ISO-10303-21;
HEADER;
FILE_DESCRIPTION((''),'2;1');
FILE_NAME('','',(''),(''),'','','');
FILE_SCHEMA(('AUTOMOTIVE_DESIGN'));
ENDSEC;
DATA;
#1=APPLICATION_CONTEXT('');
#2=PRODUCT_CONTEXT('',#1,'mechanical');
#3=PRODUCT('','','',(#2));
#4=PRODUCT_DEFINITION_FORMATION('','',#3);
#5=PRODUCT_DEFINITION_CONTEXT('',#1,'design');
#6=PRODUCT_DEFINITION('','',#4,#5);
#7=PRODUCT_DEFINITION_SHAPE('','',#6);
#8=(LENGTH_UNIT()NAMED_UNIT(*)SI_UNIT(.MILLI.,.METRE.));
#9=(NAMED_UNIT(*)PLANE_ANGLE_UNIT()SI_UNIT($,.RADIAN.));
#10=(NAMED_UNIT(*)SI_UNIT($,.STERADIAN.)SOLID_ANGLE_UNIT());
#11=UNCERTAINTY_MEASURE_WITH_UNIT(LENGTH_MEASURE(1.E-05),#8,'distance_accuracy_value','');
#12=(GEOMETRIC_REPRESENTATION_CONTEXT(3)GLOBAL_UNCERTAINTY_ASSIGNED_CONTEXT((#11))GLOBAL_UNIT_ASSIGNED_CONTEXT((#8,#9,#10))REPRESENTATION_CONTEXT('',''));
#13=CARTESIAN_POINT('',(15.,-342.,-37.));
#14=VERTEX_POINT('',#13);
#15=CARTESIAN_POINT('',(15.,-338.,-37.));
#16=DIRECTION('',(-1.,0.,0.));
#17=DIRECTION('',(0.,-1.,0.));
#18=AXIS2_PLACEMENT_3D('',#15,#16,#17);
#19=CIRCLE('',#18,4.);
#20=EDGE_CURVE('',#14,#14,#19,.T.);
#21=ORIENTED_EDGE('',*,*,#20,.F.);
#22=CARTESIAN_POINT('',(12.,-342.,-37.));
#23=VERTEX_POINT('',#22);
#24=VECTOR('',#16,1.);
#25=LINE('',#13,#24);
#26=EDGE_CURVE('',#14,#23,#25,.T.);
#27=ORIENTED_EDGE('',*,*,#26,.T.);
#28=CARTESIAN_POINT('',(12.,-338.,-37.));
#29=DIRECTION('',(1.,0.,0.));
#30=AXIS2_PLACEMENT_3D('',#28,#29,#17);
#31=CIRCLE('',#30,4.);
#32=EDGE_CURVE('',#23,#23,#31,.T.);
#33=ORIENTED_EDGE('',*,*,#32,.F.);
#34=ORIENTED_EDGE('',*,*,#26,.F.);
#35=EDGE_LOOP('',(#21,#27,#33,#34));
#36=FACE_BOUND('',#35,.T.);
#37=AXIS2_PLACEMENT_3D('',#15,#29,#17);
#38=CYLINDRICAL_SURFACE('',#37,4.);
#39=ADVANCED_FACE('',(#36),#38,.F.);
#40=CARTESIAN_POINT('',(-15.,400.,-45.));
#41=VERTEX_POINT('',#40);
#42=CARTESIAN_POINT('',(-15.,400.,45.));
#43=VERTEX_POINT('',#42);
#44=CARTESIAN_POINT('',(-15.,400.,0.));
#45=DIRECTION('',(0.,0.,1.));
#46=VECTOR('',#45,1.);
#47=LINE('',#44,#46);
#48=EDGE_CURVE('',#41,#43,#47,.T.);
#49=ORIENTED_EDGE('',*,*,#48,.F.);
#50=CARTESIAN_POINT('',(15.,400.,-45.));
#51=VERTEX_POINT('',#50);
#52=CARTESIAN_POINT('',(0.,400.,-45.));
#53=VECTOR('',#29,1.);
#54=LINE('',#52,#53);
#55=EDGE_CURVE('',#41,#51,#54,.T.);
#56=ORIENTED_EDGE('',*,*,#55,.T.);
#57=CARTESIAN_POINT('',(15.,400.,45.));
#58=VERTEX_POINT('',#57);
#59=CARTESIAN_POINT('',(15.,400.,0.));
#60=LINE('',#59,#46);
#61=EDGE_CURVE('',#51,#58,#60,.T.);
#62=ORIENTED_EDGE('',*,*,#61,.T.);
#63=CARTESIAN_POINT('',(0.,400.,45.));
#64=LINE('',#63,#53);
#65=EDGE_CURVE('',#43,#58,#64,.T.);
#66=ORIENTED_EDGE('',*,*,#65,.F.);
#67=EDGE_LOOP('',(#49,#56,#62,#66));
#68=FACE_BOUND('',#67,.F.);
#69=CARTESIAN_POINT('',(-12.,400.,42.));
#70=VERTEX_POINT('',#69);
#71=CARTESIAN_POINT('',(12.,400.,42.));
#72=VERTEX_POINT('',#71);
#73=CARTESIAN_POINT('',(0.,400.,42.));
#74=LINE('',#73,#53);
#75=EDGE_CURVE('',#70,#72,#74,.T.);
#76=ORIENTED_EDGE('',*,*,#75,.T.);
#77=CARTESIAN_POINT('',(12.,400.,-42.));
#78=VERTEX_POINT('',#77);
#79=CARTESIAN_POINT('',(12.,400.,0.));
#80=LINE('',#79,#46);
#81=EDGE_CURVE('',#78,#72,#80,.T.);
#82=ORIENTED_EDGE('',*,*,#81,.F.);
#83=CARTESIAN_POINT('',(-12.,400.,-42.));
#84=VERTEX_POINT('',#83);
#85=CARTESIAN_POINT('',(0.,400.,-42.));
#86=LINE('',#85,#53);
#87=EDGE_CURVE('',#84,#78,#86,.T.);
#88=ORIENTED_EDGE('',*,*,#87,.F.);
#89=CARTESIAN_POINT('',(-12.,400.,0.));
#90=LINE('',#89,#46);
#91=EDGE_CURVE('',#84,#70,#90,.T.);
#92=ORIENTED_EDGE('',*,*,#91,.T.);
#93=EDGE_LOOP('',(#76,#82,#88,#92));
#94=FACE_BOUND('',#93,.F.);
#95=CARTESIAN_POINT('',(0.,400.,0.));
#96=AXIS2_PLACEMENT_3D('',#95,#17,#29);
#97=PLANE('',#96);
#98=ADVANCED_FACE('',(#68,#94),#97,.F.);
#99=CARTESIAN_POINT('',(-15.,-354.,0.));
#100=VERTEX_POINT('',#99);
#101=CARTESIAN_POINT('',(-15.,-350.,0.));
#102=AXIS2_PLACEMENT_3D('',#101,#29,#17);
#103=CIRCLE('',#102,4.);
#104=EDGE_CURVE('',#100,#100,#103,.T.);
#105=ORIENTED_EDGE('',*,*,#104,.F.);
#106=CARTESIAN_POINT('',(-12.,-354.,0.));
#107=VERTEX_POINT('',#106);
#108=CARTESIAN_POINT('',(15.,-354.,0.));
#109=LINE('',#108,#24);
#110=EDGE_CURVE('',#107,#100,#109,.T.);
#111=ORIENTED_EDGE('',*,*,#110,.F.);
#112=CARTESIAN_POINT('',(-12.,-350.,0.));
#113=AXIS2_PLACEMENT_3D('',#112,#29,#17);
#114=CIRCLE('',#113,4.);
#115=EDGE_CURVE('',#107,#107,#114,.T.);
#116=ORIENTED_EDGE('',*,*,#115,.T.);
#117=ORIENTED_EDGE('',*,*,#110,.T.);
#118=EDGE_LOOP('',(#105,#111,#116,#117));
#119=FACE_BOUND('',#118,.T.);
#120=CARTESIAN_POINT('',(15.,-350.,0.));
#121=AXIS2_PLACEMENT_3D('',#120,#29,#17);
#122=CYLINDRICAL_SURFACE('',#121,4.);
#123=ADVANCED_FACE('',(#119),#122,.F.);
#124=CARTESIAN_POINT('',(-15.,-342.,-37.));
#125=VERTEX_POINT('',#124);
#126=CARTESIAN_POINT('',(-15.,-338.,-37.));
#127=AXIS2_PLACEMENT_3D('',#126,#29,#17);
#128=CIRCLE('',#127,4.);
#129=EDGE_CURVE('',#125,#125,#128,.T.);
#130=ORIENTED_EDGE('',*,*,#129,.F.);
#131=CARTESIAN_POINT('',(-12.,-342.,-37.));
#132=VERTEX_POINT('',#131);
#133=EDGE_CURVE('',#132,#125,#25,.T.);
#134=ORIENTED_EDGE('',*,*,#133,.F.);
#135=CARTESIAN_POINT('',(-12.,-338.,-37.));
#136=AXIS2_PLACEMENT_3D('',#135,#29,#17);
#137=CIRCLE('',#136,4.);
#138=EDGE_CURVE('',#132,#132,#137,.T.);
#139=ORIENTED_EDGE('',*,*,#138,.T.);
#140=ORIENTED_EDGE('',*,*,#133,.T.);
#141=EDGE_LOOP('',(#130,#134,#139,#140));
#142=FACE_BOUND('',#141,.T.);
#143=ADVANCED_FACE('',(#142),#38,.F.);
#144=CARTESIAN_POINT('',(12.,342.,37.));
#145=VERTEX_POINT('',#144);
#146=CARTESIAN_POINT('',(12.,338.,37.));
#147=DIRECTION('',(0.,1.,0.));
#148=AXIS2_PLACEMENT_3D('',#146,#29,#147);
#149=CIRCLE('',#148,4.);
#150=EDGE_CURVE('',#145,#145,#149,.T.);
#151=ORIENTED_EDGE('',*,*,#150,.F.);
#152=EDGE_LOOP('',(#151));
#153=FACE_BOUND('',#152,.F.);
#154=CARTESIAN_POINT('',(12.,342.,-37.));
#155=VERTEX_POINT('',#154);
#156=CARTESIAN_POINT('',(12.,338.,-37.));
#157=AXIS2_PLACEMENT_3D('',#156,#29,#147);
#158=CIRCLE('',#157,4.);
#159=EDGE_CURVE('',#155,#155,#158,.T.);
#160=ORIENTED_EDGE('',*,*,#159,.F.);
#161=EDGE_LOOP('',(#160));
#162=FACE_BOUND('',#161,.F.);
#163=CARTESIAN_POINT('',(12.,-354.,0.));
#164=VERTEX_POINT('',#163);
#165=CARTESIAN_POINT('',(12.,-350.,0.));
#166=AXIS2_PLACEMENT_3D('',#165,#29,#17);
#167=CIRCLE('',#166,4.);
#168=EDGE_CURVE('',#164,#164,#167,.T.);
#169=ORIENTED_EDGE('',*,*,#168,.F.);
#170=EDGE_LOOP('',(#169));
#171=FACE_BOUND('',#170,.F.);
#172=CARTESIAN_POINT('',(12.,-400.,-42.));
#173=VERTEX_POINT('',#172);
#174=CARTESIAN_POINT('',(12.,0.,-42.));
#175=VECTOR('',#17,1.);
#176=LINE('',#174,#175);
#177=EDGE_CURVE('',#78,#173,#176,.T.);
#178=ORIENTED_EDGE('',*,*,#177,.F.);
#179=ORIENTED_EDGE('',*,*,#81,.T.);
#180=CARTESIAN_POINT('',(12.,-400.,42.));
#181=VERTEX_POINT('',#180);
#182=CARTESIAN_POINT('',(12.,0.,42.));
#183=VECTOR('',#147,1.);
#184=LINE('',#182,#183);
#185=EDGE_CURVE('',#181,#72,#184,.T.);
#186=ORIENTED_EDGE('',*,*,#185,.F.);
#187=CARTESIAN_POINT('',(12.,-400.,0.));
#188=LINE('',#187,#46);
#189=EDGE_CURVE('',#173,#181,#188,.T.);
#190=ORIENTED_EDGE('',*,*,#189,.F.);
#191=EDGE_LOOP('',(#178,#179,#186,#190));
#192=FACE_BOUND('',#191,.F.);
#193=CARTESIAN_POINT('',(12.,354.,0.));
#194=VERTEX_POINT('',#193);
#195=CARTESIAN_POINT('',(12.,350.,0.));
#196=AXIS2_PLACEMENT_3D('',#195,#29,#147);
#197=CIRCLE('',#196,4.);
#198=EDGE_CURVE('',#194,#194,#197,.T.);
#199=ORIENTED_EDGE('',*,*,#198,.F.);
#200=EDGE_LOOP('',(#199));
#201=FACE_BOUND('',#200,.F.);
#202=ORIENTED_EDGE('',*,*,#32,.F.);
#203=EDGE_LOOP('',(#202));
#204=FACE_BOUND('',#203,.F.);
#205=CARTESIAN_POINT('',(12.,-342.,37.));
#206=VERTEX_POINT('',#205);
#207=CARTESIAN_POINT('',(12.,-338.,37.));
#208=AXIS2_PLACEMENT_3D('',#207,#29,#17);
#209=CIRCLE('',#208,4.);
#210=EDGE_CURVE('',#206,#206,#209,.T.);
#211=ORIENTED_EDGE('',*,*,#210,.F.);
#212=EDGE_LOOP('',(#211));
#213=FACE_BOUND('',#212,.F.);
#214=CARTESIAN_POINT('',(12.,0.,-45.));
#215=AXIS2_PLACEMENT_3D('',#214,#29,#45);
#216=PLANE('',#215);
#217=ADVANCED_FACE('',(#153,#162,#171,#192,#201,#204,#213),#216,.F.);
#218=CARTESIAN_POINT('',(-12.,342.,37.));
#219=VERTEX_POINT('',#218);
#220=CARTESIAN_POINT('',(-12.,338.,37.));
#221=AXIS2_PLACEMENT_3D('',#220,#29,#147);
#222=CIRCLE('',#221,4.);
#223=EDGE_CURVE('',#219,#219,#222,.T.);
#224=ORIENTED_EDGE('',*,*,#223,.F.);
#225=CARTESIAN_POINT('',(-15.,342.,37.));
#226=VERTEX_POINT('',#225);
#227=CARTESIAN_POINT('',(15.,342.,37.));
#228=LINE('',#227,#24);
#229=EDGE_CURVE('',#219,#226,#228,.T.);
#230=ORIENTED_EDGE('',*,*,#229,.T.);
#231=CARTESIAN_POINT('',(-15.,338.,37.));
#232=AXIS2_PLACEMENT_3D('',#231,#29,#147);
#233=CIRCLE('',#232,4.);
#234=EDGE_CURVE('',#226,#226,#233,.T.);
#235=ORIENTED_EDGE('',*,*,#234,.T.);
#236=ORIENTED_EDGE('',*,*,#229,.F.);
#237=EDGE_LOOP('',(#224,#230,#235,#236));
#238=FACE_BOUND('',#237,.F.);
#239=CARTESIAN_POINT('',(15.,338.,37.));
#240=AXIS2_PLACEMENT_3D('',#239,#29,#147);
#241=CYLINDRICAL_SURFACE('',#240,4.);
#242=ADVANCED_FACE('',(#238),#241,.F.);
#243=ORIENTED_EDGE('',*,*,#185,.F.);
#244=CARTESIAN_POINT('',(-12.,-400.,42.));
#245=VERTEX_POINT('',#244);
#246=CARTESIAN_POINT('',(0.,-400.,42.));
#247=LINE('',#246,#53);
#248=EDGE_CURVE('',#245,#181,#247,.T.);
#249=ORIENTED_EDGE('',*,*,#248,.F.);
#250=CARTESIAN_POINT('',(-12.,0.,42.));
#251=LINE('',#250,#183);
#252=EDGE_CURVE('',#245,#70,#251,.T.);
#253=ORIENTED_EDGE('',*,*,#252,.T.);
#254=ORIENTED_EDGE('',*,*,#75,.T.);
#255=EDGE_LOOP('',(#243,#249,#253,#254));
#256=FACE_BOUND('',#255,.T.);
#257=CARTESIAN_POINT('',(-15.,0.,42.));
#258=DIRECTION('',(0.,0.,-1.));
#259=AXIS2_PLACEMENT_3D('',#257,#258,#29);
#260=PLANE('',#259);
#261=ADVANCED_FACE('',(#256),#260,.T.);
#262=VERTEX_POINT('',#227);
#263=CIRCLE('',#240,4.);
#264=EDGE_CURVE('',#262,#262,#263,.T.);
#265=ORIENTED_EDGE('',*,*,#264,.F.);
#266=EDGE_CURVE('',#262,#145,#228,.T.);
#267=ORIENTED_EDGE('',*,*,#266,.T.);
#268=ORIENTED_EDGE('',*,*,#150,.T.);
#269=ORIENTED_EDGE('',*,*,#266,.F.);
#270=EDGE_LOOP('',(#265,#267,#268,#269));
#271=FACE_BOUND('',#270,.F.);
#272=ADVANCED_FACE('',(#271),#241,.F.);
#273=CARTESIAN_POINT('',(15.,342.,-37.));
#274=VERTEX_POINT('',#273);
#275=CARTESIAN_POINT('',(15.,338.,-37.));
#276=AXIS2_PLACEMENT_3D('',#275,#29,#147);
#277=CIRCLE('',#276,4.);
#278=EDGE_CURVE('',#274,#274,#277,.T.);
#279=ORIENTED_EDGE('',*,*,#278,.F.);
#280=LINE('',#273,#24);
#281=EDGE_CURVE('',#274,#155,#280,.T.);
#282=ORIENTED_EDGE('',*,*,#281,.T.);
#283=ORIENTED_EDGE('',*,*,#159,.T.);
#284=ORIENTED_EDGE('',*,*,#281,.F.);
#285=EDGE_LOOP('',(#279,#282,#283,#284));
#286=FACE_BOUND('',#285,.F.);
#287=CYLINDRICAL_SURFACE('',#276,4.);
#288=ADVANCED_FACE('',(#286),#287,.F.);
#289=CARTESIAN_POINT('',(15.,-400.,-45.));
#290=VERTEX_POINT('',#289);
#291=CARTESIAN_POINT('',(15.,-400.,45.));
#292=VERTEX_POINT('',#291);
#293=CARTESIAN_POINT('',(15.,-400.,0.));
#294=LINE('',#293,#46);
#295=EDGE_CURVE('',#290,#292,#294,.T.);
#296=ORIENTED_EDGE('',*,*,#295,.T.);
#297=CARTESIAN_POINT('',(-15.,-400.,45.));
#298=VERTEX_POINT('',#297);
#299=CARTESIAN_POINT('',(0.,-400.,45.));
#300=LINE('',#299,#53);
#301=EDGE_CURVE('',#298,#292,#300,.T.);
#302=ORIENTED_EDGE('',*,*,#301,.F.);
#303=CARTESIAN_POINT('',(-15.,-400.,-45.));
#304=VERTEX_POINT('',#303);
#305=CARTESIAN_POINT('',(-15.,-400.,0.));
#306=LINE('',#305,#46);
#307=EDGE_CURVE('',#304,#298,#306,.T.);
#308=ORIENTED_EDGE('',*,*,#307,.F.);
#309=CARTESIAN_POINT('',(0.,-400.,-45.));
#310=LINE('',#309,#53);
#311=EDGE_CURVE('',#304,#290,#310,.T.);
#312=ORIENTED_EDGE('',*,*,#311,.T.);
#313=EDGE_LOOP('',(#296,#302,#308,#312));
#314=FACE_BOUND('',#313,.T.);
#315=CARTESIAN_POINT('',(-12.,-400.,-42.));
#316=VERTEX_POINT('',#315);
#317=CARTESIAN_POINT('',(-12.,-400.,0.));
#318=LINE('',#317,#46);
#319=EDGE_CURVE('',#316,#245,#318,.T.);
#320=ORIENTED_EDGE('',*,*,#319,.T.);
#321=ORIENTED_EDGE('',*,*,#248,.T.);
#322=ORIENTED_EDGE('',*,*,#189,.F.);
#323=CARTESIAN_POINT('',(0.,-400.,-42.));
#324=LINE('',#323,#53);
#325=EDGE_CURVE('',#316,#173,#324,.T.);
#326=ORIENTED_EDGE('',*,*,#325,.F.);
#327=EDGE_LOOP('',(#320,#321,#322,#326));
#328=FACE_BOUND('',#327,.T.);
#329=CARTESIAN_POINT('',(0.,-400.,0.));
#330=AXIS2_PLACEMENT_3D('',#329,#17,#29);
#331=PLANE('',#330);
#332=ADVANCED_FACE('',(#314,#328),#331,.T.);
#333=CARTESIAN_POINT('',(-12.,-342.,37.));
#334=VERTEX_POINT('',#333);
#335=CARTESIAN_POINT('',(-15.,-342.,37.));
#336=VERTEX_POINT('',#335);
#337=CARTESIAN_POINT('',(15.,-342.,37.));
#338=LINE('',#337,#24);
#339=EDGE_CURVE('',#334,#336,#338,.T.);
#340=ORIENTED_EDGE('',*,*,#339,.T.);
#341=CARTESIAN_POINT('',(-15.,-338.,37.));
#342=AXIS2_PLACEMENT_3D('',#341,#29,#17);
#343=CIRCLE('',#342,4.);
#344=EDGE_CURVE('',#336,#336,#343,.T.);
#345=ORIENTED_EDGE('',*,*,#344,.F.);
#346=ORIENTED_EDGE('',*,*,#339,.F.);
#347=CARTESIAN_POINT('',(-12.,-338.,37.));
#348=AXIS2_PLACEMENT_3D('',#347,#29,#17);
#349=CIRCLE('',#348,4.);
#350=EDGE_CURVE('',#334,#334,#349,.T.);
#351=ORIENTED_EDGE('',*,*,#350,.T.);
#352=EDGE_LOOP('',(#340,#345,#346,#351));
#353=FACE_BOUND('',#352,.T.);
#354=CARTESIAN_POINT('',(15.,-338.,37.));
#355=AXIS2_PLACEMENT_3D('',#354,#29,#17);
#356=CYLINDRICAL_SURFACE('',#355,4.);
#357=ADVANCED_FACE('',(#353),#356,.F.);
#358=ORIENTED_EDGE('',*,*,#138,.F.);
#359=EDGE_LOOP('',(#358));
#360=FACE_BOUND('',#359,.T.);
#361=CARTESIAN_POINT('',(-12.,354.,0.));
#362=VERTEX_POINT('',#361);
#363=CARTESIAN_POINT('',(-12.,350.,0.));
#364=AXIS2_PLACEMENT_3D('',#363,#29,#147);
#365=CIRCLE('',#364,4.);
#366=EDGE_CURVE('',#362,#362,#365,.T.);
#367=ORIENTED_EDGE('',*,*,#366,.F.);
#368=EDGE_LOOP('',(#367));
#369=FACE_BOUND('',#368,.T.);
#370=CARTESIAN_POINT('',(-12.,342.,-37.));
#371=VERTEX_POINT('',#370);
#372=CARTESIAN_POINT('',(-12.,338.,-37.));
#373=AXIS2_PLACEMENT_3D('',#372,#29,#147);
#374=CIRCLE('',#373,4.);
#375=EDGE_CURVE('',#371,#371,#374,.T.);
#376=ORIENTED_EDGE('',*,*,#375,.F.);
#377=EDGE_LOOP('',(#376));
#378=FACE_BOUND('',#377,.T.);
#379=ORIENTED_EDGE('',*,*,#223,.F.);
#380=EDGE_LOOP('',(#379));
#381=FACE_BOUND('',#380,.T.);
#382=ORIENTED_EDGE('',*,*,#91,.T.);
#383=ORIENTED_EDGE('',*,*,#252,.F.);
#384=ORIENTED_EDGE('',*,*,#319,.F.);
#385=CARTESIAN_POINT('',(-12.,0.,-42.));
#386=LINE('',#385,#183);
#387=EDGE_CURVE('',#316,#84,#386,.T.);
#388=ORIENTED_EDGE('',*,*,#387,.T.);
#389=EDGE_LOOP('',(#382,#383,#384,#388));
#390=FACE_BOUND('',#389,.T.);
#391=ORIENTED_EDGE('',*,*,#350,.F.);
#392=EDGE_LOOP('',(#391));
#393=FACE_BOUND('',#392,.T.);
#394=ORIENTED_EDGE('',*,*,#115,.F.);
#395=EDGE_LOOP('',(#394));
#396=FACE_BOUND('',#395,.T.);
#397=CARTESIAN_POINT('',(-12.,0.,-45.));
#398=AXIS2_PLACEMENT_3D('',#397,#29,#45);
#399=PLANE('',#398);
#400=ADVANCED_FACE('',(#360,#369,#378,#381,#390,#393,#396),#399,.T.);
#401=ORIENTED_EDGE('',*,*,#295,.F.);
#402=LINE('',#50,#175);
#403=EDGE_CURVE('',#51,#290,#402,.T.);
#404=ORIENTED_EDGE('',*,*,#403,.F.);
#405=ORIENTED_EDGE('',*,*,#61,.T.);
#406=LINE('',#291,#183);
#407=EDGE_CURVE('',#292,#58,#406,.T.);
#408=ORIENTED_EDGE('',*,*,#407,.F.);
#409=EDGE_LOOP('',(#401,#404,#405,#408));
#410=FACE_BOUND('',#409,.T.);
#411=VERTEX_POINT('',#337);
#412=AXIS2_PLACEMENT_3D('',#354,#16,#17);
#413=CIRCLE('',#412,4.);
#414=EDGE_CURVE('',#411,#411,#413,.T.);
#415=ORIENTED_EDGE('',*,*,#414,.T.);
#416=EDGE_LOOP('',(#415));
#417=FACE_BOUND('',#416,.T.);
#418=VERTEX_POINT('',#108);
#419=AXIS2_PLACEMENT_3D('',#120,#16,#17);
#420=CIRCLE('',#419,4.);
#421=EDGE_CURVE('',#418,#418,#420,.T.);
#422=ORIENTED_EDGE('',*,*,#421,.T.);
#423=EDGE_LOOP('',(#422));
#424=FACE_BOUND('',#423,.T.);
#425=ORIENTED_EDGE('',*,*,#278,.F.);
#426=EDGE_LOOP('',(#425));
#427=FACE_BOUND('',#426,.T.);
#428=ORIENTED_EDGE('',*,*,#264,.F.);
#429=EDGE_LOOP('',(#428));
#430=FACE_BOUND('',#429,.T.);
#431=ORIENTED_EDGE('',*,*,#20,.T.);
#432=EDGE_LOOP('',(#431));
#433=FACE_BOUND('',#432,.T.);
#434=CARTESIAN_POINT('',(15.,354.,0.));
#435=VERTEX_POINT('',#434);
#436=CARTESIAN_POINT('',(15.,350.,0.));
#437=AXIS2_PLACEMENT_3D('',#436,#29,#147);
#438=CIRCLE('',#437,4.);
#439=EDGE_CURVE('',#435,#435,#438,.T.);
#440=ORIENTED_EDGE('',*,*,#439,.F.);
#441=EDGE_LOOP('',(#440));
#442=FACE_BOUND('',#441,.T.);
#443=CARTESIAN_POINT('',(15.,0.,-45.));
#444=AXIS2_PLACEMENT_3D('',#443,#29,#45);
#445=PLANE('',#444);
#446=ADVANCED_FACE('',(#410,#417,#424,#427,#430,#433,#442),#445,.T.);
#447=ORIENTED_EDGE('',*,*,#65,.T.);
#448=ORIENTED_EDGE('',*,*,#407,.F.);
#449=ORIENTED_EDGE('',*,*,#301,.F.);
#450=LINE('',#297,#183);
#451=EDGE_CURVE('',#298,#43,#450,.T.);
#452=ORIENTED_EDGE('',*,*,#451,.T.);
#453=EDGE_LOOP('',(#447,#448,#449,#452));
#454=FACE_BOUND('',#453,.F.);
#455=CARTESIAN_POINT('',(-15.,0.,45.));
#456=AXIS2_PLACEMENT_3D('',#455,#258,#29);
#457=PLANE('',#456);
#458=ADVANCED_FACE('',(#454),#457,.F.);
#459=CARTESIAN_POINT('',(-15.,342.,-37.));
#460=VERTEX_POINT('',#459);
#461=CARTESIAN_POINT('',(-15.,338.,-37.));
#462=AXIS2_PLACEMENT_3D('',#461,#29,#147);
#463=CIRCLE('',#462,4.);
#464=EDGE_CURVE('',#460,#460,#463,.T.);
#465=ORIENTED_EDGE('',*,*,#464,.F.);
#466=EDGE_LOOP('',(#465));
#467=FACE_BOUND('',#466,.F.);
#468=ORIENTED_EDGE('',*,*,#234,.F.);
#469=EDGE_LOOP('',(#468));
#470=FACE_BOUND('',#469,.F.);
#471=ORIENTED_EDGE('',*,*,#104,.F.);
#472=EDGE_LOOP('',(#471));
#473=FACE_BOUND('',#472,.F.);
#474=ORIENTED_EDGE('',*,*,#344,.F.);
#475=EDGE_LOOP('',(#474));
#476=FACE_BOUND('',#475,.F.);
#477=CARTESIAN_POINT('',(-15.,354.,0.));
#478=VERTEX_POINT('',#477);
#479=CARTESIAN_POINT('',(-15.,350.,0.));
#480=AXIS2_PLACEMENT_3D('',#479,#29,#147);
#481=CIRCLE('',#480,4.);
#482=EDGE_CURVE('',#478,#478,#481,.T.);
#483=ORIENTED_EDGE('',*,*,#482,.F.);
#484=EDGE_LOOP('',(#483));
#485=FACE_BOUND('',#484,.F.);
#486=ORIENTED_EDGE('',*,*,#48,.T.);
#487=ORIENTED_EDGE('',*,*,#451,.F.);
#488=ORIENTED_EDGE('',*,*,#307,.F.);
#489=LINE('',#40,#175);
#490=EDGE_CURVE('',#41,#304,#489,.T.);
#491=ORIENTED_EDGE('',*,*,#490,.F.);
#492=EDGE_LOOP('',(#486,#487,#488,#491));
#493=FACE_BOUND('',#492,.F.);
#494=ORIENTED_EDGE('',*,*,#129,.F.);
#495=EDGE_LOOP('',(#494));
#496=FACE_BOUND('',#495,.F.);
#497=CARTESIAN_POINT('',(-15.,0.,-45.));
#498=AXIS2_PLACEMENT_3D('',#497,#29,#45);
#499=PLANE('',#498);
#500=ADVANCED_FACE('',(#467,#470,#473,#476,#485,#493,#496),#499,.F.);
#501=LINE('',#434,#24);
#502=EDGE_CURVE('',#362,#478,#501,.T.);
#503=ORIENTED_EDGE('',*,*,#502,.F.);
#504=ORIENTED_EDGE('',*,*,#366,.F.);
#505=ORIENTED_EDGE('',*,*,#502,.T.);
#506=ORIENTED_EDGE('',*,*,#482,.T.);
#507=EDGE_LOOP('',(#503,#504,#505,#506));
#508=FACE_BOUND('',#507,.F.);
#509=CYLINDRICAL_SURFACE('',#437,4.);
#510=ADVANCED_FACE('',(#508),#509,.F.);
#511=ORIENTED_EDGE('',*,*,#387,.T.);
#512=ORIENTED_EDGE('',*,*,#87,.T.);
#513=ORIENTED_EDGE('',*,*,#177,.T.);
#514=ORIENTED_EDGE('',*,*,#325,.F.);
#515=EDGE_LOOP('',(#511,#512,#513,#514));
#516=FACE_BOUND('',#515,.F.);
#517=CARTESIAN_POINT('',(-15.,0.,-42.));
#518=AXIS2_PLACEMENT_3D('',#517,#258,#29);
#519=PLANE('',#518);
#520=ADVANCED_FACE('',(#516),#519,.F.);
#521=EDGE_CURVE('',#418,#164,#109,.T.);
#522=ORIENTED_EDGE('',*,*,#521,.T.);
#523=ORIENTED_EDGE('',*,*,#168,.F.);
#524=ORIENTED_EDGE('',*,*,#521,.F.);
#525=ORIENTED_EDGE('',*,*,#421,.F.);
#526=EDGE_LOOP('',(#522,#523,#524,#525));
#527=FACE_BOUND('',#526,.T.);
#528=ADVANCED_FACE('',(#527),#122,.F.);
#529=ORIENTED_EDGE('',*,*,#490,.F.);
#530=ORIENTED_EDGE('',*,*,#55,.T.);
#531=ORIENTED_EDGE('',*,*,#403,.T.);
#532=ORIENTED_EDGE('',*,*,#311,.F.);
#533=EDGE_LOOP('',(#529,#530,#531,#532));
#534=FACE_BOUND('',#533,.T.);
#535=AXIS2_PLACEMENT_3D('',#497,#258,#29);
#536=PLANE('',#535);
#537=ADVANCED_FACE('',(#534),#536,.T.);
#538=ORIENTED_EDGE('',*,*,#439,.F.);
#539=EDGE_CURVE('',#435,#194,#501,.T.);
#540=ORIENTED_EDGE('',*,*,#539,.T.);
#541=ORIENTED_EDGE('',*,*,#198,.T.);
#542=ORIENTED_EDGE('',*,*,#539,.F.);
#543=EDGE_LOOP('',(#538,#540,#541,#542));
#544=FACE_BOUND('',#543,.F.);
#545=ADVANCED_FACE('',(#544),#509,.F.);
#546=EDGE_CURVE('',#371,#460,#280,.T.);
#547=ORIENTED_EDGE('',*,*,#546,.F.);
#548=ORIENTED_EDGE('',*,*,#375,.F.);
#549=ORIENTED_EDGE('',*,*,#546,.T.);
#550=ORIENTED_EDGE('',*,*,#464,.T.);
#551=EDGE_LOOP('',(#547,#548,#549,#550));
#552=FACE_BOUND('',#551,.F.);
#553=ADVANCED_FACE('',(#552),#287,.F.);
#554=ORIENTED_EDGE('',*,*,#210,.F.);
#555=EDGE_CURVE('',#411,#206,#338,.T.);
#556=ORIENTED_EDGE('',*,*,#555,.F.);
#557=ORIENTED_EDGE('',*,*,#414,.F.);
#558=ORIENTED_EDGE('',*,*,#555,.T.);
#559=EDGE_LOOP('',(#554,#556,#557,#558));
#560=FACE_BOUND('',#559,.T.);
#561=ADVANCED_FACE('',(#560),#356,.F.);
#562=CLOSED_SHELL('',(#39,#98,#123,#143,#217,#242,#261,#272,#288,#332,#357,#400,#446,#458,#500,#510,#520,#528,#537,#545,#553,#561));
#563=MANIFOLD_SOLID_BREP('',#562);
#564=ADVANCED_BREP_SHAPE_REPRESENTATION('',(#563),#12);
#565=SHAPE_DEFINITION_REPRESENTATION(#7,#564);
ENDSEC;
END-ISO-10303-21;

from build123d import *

# Parameters (mm, degrees)
F0_W     = 30
F0_H     = 90
F1_DEPTH = 400
F2_T     = -3
F3_R     = 4
F4_DEPTH = 30.001


# Not quite as in the source:
# - a pattern or mirror of a feature is missing from the dataset's text; its kind, count and spacing are read off the source's solid


with BuildPart() as f1:
    # F0 (on Front) → F1 (new body, symmetric)
    with BuildSketch(Plane.XZ):
        Rectangle(F0_W, F0_H)
    extrude(amount=F1_DEPTH, both=True)

    # F2
    f2_openings = [f1.faces().sort_by_distance(p)[0] for p in [
        (0, -400, 0),
        (0, 400, 0),
    ]]
    offset(amount=F2_T, openings=f2_openings)

    # F3 (on face) → F4 (cut, through all)
    with BuildSketch(Plane.YZ.offset(15)):
        with Locations((338, 37)):
            Circle(F3_R)
        with Locations((350, 0)):
            Circle(F3_R)
        with Locations((338, -37)):
            Circle(F3_R)
    f4 = extrude(amount=-F4_DEPTH, mode=Mode.SUBTRACT)

    # F4_copies: F4 across plane
    add(f4.mirror(Plane(origin=(0, 0, 0), x_dir=(0, 0, -1), z_dir=(0, -1, 0))), mode=Mode.SUBTRACT)


solid = f1.part
